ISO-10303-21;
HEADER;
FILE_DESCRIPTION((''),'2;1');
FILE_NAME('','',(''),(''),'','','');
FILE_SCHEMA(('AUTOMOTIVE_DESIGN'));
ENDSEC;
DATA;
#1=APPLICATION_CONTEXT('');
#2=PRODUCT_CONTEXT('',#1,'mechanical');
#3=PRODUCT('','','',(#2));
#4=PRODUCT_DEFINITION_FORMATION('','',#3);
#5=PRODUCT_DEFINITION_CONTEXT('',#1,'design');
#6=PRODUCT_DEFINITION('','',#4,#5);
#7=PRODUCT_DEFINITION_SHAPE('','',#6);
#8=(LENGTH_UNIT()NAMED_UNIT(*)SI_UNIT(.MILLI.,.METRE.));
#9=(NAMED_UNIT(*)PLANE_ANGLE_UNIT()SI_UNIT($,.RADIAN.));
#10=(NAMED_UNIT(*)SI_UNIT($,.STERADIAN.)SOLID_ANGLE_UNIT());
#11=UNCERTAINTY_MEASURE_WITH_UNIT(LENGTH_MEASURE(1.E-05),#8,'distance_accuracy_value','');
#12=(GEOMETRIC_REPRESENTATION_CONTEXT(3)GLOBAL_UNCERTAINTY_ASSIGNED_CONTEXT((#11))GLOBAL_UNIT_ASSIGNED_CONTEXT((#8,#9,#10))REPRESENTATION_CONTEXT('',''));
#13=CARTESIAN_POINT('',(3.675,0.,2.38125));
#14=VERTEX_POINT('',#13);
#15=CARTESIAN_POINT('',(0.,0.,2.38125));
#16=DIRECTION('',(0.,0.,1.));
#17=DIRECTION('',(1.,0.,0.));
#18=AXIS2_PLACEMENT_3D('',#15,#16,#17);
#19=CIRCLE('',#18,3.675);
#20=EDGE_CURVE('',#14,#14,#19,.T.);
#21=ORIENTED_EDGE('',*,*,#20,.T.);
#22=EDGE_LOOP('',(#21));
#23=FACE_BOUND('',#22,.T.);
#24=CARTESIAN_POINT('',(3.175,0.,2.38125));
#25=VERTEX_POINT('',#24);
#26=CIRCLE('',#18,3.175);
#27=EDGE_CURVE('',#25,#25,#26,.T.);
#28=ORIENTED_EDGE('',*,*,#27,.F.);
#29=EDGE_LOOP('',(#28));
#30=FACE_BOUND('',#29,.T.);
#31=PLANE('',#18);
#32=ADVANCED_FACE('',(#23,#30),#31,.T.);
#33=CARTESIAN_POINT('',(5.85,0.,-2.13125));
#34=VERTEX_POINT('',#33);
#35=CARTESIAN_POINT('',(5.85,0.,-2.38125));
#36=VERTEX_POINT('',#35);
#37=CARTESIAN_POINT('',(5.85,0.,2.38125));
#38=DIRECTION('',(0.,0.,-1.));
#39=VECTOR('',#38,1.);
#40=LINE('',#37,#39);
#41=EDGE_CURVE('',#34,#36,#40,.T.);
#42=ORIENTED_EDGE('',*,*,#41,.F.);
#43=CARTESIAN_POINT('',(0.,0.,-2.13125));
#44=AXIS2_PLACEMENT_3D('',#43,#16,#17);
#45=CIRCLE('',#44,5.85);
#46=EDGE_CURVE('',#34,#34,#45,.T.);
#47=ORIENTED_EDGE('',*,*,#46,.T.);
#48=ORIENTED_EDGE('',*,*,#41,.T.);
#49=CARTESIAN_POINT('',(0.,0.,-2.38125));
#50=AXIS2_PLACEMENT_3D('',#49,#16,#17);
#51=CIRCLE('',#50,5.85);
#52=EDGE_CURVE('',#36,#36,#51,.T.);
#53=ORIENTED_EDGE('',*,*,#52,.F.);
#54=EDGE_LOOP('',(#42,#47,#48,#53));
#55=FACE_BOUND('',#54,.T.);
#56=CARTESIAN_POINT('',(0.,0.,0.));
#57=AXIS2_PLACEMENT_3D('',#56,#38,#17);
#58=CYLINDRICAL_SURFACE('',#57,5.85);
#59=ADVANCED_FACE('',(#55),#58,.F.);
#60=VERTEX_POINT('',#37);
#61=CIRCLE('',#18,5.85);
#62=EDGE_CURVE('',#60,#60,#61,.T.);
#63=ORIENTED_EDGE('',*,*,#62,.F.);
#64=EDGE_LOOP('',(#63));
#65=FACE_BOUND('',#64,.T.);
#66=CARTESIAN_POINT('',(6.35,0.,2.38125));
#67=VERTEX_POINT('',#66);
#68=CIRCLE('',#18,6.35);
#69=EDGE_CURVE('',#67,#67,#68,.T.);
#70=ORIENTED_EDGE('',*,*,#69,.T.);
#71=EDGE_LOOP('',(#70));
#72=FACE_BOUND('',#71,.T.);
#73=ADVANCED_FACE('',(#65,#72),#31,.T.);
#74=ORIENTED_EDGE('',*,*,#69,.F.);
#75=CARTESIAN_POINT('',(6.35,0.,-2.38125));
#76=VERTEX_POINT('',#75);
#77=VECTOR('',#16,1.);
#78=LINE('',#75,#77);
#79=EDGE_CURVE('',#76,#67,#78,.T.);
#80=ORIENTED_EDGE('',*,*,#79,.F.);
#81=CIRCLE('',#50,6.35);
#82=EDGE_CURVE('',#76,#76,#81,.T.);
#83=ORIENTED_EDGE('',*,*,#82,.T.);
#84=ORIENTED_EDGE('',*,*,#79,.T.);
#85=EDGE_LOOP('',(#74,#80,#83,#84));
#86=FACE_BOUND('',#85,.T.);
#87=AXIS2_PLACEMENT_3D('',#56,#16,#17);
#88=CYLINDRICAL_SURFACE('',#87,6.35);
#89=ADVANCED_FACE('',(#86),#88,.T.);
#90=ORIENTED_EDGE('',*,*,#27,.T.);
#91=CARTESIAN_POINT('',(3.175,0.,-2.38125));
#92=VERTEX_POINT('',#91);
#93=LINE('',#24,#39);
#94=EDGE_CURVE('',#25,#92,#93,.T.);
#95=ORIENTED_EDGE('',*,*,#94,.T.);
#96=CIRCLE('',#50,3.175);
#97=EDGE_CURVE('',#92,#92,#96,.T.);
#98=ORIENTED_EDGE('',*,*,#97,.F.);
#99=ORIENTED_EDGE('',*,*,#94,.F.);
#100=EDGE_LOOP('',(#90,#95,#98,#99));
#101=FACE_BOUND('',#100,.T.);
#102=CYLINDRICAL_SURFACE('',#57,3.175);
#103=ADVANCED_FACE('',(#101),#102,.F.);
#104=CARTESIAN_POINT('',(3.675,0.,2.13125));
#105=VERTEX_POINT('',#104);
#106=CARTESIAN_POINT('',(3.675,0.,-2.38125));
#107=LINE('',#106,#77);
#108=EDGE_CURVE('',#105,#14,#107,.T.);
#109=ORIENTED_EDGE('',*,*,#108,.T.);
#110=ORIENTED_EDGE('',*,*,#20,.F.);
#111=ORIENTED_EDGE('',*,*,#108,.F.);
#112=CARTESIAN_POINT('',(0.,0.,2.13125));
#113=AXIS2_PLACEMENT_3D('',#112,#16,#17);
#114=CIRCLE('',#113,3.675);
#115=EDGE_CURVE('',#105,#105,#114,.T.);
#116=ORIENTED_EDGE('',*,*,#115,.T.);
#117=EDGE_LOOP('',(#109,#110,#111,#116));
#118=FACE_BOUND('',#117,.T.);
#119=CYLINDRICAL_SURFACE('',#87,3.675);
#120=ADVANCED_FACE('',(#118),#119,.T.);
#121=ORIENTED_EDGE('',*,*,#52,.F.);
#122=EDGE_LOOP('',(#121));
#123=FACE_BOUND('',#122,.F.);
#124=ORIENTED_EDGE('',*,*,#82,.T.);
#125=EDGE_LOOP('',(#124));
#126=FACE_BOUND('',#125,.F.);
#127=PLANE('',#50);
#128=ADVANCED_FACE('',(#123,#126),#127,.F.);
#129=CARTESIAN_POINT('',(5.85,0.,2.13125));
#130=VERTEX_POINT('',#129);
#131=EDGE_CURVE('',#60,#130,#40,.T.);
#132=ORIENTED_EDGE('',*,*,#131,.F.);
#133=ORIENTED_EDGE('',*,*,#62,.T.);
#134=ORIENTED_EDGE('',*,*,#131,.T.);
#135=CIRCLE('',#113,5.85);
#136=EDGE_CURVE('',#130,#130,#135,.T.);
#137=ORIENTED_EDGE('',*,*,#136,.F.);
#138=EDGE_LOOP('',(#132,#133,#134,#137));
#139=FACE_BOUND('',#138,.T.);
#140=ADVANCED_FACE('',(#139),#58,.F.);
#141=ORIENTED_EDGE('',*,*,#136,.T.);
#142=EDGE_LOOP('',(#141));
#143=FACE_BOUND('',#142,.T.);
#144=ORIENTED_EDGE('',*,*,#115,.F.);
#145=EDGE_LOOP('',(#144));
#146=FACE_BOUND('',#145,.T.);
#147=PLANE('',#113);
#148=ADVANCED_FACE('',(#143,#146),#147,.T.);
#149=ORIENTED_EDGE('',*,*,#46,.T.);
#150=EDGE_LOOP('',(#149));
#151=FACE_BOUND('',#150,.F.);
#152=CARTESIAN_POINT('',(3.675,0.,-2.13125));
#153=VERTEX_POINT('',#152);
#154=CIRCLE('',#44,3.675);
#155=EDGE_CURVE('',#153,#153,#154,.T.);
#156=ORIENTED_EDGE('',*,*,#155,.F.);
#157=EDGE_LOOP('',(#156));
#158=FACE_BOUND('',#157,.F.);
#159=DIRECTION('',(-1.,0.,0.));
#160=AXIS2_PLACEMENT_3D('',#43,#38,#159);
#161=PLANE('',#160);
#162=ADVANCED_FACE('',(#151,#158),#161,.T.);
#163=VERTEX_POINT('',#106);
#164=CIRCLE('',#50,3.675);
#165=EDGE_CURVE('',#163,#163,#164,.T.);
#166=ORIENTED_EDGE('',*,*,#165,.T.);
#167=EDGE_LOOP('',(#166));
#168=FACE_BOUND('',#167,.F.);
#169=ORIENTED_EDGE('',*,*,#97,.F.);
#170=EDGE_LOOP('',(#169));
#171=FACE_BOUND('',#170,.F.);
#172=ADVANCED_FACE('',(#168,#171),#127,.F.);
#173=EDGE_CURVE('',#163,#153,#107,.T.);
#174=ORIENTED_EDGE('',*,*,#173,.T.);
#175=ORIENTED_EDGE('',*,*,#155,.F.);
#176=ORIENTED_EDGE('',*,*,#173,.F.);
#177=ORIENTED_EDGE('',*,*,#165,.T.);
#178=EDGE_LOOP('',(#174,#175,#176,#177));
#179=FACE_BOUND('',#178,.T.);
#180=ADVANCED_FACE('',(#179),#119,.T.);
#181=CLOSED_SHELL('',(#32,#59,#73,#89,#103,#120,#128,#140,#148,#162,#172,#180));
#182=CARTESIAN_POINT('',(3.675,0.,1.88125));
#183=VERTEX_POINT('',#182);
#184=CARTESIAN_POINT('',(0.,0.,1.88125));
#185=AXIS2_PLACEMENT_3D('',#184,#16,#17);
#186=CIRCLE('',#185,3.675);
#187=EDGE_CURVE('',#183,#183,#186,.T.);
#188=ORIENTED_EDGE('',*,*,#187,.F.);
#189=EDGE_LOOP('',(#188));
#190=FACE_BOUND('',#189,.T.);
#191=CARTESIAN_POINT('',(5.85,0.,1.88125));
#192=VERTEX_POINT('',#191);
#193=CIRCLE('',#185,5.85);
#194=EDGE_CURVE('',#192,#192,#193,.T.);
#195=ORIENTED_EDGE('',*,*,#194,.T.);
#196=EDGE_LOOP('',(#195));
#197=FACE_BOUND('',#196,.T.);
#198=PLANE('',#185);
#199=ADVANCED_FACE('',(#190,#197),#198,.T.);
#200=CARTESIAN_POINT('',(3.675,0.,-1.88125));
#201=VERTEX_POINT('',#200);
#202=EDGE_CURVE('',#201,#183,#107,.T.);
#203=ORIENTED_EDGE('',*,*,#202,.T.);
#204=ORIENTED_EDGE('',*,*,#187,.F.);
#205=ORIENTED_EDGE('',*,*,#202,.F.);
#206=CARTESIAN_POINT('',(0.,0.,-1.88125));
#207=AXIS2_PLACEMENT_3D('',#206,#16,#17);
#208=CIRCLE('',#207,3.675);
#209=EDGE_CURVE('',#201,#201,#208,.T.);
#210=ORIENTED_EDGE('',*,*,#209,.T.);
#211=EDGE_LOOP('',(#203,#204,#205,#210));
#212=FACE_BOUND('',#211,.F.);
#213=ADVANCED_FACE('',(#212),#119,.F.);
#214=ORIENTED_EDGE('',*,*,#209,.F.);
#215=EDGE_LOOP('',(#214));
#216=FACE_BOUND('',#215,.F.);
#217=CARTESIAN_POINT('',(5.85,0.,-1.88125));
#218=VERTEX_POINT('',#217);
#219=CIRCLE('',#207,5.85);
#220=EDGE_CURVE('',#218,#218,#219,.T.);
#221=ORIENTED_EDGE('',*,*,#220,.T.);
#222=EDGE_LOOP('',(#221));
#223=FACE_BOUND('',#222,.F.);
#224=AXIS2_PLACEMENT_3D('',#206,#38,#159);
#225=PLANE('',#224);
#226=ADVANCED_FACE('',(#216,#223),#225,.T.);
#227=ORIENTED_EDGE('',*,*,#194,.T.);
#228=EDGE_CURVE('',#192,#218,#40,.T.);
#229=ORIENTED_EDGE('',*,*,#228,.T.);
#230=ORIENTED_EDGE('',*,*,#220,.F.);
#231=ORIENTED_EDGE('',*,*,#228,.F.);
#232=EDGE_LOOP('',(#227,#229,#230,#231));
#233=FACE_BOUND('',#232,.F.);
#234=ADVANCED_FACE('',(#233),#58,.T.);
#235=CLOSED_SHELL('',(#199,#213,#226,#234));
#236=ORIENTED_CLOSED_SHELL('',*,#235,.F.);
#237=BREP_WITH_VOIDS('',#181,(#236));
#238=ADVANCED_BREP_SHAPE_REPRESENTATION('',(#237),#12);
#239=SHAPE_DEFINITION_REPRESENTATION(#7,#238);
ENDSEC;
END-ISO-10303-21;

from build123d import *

# Parameters (mm, degrees)
F0_R     = 3.675
F0_R_2   = 3.175
F1_DEPTH = 2.38125
F0_R_3   = 6.35
F0_R_4   = 5.85
F3_R     = 5.85
F3_R_2   = 3.675
F4_DEPTH = 0.25


# Not quite as in the source:
# - a length typed as a fraction of an inch, garbled in the dataset ("3 / 203.2 mm" for 3/8 in), is restored


with BuildPart() as f1:
    # F0 (on Top) → F1 (new body, symmetric)
    with BuildSketch(Plane.XY):
        Circle(F0_R)
        Circle(F0_R_2, mode=Mode.SUBTRACT)
    extrude(amount=F1_DEPTH, both=True)



with BuildPart() as f1b:
    # F0 (on Top) → F1, piece 2 (new body, symmetric)
    with BuildSketch(Plane.XY):
        Circle(F0_R_3)
        Circle(F0_R_4, mode=Mode.SUBTRACT)
    extrude(amount=F1_DEPTH, both=True)


with BuildPart() as f1_1:
    add(f1.part)

    add(f1b.part)  # F4 merges F1b
    # F3 (on offset) → F4 (join)
    with BuildSketch(Plane.XY.offset(1.88125)):
        Circle(F3_R)
        Circle(F3_R_2, mode=Mode.SUBTRACT)
    extrude(amount=F4_DEPTH)

    # F5: F1 across plane


with BuildPart() as f1_2:
    add(f1_1.part)
    add(f1_1.part.mirror(Plane.XY))


solid = f1_2.part
